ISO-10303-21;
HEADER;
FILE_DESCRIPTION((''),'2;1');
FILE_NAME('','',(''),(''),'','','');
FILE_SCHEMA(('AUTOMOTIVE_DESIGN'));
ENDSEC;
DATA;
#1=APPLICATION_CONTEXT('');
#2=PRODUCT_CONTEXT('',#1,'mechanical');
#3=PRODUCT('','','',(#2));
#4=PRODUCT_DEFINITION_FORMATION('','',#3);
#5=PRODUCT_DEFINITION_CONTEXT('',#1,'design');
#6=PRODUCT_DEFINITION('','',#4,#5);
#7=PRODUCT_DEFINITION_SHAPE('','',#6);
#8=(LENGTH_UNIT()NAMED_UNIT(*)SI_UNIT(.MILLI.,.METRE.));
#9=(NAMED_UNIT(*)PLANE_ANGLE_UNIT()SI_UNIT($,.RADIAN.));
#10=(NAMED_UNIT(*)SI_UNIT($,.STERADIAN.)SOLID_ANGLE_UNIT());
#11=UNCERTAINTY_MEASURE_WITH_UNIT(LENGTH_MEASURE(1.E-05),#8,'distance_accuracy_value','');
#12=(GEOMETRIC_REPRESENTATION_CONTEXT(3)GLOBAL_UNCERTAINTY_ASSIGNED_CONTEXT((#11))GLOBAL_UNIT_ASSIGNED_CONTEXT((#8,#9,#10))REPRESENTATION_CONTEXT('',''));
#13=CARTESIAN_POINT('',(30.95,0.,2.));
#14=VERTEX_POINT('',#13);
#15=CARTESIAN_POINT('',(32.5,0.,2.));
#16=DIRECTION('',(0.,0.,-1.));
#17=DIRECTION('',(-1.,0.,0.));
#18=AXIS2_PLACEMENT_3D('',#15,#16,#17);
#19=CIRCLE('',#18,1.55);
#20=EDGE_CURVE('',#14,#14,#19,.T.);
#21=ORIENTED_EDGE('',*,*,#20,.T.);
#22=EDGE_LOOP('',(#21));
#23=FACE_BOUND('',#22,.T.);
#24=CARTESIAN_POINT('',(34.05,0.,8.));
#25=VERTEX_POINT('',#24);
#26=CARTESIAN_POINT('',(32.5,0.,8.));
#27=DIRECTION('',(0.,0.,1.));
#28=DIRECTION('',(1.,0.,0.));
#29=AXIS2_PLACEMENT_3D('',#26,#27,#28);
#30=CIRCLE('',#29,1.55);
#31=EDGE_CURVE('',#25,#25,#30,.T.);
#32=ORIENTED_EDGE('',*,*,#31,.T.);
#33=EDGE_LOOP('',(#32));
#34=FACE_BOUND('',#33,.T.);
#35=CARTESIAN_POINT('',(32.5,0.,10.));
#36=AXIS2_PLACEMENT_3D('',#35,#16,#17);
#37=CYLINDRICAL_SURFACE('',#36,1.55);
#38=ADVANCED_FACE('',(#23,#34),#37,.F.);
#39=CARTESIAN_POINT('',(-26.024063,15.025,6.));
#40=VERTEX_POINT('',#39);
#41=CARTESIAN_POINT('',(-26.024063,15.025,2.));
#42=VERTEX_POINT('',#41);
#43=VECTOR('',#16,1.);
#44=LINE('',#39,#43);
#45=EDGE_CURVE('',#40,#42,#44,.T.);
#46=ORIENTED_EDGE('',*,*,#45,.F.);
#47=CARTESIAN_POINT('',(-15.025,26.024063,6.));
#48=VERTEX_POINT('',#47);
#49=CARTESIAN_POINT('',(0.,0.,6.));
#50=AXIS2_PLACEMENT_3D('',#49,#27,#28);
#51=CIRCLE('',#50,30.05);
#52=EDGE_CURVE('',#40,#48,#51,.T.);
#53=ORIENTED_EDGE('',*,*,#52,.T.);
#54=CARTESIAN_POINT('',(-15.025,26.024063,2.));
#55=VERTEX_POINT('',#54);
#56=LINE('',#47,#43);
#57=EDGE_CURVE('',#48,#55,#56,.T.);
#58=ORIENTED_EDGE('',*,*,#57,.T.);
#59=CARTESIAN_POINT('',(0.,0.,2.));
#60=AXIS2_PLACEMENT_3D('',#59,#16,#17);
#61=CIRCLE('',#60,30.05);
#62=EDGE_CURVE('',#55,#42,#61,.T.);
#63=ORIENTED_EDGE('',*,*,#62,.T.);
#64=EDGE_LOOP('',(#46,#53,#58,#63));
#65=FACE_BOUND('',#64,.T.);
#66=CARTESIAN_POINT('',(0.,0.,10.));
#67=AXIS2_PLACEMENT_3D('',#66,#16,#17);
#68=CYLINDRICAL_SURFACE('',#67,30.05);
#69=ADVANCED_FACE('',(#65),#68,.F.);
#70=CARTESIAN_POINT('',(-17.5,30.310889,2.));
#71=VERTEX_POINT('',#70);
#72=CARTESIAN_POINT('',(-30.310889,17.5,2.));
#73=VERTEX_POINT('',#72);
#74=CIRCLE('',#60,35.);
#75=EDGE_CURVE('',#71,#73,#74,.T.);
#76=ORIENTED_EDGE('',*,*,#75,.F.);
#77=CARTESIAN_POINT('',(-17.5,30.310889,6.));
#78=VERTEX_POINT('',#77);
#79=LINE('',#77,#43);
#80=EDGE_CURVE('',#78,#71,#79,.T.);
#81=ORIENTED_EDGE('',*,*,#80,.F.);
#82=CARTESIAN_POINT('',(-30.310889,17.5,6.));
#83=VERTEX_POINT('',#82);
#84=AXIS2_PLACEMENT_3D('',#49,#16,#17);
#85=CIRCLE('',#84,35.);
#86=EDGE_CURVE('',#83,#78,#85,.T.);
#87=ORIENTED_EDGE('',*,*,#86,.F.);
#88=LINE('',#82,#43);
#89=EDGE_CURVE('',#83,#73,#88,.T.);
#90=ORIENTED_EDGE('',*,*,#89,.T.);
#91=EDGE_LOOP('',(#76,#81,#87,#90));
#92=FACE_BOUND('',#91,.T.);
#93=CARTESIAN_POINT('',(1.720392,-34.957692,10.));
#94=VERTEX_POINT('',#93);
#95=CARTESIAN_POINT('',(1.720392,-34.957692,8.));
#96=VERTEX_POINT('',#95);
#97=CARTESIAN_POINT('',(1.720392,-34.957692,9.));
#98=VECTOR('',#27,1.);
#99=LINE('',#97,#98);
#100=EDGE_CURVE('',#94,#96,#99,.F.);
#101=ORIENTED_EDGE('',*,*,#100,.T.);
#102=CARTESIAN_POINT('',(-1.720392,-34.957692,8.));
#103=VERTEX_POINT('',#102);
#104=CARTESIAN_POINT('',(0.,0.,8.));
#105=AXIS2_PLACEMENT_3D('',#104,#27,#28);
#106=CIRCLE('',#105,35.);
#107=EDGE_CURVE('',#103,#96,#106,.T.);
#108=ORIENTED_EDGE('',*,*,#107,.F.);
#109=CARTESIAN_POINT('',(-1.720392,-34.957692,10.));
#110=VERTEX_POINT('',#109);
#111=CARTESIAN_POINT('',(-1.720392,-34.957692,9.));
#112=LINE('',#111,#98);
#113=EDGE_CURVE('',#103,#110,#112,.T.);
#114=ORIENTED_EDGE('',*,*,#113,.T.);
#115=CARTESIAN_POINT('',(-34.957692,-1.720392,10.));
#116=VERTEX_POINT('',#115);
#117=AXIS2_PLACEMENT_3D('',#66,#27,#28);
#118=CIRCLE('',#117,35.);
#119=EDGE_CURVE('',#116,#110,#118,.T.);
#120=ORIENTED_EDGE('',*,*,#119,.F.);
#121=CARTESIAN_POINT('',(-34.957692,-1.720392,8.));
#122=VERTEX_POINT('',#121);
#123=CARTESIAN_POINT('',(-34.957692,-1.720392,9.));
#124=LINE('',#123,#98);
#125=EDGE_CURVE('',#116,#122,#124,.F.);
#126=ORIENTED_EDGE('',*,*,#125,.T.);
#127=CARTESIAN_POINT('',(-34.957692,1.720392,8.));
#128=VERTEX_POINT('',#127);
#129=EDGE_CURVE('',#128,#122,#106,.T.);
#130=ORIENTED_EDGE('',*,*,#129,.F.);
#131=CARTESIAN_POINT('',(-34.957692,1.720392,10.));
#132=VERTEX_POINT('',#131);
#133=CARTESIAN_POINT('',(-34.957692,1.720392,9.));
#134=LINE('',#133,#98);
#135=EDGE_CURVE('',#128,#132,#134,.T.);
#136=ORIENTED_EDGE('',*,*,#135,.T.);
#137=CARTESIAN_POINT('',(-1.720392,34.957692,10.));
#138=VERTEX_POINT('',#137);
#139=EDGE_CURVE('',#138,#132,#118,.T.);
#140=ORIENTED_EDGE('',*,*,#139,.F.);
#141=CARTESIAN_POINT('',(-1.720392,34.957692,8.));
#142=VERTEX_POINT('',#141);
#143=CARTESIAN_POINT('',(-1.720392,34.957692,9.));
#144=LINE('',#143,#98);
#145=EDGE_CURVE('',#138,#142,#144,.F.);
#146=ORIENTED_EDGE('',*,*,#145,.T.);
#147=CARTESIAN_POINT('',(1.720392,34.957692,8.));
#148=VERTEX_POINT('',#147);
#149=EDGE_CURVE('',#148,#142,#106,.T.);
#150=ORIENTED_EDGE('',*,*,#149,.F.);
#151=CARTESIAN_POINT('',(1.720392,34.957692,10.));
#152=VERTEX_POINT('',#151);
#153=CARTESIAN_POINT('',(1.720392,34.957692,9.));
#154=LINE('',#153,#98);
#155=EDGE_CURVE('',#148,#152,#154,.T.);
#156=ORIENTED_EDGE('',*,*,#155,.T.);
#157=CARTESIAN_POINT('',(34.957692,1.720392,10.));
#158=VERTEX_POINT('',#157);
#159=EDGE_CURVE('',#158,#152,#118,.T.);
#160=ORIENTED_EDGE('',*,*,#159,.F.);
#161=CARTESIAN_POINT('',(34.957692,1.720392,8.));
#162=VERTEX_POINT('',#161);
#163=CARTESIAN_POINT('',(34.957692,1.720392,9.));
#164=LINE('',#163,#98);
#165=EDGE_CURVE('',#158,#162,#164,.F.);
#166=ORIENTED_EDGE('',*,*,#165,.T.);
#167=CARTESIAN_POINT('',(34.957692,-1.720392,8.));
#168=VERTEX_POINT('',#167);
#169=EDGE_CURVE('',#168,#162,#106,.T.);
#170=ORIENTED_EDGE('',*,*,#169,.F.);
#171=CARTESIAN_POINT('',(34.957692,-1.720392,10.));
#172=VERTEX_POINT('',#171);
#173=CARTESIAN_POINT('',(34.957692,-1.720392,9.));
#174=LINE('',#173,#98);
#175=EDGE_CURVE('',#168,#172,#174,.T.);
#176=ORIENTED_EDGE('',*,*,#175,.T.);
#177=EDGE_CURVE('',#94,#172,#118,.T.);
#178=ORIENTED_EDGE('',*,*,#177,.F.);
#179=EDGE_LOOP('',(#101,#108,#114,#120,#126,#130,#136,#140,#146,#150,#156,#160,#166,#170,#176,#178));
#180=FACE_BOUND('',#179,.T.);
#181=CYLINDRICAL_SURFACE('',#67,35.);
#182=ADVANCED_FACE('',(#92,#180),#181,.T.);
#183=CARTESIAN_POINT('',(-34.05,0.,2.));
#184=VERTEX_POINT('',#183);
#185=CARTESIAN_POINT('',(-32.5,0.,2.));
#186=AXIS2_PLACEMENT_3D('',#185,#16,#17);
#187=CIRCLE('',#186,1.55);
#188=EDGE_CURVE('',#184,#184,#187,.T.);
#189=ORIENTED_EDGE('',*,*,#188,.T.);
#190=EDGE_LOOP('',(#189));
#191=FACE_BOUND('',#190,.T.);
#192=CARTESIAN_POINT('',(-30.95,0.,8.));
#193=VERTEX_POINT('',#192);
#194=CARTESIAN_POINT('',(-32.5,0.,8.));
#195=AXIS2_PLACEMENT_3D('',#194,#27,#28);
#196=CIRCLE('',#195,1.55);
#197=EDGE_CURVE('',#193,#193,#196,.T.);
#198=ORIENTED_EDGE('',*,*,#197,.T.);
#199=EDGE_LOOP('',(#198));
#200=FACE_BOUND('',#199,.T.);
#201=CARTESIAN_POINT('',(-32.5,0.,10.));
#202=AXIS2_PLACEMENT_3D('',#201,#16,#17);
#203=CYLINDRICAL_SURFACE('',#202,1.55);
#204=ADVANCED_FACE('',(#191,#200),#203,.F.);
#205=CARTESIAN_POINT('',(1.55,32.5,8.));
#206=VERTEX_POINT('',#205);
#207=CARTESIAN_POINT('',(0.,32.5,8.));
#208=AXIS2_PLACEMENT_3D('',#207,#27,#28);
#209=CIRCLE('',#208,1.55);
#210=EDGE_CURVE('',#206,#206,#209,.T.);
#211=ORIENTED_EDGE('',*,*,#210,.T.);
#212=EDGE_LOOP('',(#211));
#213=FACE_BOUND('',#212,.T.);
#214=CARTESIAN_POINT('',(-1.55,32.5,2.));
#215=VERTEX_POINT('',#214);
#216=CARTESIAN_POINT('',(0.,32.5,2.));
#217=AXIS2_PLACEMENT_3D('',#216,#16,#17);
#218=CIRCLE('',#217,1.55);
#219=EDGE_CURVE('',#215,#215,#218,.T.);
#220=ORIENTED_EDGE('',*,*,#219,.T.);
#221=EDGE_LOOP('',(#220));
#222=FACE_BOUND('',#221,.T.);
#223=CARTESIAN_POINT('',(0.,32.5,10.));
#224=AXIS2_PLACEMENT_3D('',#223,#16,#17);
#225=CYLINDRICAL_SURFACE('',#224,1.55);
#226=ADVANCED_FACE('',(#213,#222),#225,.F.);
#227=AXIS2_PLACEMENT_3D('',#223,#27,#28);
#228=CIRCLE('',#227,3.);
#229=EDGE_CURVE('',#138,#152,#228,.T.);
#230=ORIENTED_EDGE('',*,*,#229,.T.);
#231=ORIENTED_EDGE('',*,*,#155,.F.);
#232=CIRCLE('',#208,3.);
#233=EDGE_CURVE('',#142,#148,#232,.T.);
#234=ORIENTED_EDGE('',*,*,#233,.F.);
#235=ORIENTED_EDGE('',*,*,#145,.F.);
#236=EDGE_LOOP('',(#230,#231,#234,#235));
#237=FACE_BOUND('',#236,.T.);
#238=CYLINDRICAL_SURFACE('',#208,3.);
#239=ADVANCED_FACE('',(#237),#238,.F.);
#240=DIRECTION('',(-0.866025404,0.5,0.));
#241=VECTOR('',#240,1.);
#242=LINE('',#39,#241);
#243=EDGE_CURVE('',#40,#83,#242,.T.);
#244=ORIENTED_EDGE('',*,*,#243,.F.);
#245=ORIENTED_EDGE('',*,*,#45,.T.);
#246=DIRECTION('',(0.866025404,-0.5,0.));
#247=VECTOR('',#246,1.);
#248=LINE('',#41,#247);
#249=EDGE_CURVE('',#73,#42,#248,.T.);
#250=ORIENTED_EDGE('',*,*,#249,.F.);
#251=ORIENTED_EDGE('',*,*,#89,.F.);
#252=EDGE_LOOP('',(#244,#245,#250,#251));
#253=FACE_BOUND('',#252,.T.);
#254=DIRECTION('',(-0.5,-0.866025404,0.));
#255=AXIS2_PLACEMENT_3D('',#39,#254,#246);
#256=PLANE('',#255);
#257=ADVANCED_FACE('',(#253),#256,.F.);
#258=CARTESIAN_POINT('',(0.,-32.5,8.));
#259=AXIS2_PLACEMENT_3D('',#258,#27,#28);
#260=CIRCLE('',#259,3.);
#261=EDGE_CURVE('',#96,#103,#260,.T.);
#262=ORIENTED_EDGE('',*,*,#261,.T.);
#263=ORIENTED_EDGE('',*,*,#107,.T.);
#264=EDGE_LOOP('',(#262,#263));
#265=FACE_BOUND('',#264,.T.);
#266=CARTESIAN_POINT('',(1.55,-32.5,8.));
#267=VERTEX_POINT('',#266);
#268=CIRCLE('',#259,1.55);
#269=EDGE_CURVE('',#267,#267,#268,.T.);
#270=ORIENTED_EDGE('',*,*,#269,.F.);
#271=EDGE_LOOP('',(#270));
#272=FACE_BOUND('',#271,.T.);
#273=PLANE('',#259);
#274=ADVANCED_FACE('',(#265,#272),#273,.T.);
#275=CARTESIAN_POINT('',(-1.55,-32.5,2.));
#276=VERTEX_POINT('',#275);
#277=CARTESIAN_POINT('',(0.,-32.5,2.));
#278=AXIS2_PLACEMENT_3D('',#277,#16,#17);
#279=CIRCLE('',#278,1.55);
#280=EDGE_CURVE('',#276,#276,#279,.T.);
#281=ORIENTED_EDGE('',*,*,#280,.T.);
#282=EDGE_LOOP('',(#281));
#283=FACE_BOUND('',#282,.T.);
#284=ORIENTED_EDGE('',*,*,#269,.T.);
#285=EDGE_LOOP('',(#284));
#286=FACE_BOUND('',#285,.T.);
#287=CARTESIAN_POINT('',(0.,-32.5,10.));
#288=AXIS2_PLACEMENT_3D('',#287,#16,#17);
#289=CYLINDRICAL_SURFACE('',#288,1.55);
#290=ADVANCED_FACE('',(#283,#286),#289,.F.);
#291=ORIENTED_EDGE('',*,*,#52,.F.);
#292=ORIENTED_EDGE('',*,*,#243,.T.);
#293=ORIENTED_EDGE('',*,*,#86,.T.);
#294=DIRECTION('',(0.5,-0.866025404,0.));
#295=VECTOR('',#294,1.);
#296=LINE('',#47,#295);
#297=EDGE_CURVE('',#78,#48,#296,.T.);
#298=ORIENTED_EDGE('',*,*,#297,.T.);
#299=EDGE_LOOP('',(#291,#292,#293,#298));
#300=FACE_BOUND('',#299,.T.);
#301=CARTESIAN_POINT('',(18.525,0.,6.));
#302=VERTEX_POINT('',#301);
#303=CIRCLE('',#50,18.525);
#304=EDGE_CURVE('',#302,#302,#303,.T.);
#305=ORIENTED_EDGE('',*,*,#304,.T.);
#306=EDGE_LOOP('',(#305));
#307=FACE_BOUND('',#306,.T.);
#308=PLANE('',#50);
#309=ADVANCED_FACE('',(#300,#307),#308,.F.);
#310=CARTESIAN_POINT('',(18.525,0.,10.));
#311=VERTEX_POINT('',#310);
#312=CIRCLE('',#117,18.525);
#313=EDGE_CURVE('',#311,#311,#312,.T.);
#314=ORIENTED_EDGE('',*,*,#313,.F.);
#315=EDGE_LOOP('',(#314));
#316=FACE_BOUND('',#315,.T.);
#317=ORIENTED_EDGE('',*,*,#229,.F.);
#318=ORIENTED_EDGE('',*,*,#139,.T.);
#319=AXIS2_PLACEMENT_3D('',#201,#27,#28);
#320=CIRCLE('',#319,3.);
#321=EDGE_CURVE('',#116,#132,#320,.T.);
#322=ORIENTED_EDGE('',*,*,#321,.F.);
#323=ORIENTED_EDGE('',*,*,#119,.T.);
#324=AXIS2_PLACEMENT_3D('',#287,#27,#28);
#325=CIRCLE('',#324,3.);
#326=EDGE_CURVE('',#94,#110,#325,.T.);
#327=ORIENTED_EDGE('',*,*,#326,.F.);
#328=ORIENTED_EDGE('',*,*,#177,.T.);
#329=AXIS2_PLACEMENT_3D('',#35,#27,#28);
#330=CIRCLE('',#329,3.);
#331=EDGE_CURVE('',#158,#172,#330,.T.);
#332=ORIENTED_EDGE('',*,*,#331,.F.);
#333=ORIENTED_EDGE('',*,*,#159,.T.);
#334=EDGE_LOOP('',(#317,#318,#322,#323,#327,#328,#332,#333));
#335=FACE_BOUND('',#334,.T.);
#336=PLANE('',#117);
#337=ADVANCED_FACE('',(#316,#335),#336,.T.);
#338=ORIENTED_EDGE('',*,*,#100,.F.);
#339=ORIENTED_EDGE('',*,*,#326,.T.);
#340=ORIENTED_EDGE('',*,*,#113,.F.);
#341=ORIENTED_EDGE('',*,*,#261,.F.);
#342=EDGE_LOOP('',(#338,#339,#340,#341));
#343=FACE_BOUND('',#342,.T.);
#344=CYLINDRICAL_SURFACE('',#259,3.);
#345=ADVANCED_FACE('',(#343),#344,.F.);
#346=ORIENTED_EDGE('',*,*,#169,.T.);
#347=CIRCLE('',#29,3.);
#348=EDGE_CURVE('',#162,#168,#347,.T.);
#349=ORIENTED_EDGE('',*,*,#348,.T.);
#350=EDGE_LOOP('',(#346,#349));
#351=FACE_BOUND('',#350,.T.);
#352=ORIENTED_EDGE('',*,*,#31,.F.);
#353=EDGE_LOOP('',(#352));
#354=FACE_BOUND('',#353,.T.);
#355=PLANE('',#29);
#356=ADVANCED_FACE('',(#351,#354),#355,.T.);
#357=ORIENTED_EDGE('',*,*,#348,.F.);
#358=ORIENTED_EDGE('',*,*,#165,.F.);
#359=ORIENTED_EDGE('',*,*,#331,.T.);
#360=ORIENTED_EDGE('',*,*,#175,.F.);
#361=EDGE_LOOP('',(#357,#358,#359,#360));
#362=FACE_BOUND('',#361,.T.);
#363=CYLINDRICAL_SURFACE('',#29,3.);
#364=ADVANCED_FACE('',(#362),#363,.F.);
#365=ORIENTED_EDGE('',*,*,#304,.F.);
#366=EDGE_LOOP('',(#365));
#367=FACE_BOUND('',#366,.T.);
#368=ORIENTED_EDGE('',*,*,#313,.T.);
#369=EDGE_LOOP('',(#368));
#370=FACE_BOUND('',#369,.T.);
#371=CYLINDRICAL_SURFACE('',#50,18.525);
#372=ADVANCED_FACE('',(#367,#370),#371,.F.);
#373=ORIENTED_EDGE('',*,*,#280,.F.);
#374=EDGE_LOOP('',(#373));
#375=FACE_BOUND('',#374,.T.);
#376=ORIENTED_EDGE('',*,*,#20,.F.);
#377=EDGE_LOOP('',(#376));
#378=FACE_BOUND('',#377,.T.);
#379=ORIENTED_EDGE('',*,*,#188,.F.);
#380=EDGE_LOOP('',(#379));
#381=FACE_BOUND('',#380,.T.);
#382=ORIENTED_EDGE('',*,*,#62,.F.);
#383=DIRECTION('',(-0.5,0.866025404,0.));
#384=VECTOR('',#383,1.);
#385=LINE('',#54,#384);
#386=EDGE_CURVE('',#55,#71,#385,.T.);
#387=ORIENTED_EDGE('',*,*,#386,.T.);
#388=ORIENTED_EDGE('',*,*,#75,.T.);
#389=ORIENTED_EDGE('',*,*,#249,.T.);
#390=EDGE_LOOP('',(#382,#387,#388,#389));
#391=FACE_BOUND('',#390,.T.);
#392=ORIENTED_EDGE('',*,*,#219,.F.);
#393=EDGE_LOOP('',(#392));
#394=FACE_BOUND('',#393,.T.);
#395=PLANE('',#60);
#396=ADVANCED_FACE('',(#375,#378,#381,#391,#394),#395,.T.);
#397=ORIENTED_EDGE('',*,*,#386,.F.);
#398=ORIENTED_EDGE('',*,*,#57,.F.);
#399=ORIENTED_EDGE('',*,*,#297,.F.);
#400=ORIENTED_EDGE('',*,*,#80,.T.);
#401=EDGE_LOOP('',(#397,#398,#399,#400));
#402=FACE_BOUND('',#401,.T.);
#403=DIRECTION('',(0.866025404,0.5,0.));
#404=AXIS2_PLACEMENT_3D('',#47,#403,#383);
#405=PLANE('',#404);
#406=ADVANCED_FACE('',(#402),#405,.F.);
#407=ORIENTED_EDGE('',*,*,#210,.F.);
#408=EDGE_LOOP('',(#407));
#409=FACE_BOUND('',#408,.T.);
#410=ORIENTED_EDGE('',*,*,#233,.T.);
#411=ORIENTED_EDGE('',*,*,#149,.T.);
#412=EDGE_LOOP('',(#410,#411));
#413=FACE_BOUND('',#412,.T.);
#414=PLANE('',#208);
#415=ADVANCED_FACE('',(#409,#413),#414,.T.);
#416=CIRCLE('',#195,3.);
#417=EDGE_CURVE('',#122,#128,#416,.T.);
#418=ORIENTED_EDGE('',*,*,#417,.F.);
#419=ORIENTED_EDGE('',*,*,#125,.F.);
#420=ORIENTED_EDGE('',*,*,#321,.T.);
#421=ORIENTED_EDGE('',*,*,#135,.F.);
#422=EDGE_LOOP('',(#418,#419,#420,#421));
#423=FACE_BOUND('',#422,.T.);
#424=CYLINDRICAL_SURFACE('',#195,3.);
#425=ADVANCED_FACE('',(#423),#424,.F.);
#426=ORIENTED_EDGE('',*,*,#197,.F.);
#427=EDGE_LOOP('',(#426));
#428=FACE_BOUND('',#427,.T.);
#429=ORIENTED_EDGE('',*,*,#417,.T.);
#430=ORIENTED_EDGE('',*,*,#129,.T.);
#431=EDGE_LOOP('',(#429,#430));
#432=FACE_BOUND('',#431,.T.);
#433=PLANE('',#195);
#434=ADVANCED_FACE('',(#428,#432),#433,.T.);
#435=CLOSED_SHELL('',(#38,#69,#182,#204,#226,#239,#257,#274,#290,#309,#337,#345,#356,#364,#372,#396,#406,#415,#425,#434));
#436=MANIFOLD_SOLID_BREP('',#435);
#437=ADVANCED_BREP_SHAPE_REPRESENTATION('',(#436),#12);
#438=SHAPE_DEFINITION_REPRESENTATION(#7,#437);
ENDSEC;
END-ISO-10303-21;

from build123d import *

# Parameters (mm, degrees)
EXTRUDE_1_OUTLINE_R   = 35
EXTRUDE_1_OUTLINE_R_2 = 1.55
EXTRUDE_1_OUTLINE_R_3 = 30.05
EXTRUDE_1_DEPTH       = 10
SKETCH_2_R            = 33.525
SKETCH_2_R_2          = 18.525
EXTRUDE_1_2_DEPTH     = 4
SKETCH_3_R            = 1.55
CUT_EXTRUDE_1_DEPTH   = 51.497524692
CUT_EXTRUDE_2_DEPTH   = 6
SKETCH_8_R            = 35
SKETCH_8_R_2          = 30.05
CUT_EXTRUDE_3_DEPTH   = 2
SKETCH_9_R            = 3
CUT_EXTRUDE_4_DEPTH   = 2


# Read off the part's stored shape, not the designer's step: 凸台-拉伸1
with BuildPart() as part:
    # Extrude 1 outline → Extrude 1 (new body)
    with BuildSketch(Plane.XY):
        Circle(EXTRUDE_1_OUTLINE_R)
        with Locations((0, -32.5)):
            Circle(EXTRUDE_1_OUTLINE_R_2, mode=Mode.SUBTRACT)
        with Locations((-32.5, 0)):
            Circle(EXTRUDE_1_OUTLINE_R_2, mode=Mode.SUBTRACT)
        Circle(EXTRUDE_1_OUTLINE_R_3, mode=Mode.SUBTRACT)
        with Locations((32.5, 0)):
            Circle(EXTRUDE_1_OUTLINE_R_2, mode=Mode.SUBTRACT)
        with Locations((0, 32.5)):
            Circle(EXTRUDE_1_OUTLINE_R_2, mode=Mode.SUBTRACT)
    extrude(amount=EXTRUDE_1_DEPTH)

    # 草图2 → Extrude 1 2 (add)
    with BuildSketch(Plane.XY.offset(10)):
        Circle(SKETCH_2_R)
        Circle(SKETCH_2_R_2, mode=Mode.SUBTRACT)
    extrude(amount=-EXTRUDE_1_2_DEPTH)

    # 草图3 → 切除-拉伸1 (cut, through all)
    with BuildSketch(Plane(origin=(0, 0, 0), x_dir=(-1, 0, 0), z_dir=(0, 0, -1))):
        with Locations(Location((32.5, 0, 0), (0, 0, 180))):
            Circle(SKETCH_3_R)
        with Locations(Location((0, -32.5, 0), (0, 0, 180))):
            Circle(SKETCH_3_R)
        with Locations(Location((-32.5, 0, 0), (0, 0, 180))):
            Circle(SKETCH_3_R)
        with Locations(Location((0, 32.5, 0), (0, 0, 180))):
            Circle(SKETCH_3_R)
    extrude(amount=-CUT_EXTRUDE_1_DEPTH, mode=Mode.SUBTRACT)

    # 草图7 → 切除-拉伸2 (cut)
    with BuildSketch(Plane(origin=(0, 0, 0), x_dir=(-1, 0, 0), z_dir=(0, 0, -1))):
        with BuildLine():
            Line((15.025, 26.024063384), (17.5, 30.310889132))
            ThreePointArc((17.5, 30.310889132), (24.748737342, 24.748737342), (30.310889132, 17.5))
            Line((30.310889132, 17.5), (26.024063384, 15.025))
            ThreePointArc((26.024063384, 15.025), (21.248558775, 21.248558775), (15.025, 26.024063384))
        make_face()
    extrude(amount=-CUT_EXTRUDE_2_DEPTH, mode=Mode.SUBTRACT)

    # 草图8 → 切除-拉伸3 (cut)
    with BuildSketch(Plane(origin=(0, 0, 0), x_dir=(-1, 0, 0), z_dir=(0, 0, -1))):
        with Locations(Location((0, 0, 0), (0, 0, 30))):
            Circle(SKETCH_8_R)
        Circle(SKETCH_8_R_2, mode=Mode.SUBTRACT)
    extrude(amount=-CUT_EXTRUDE_3_DEPTH, mode=Mode.SUBTRACT)

    # 草图9 → 切除-拉伸4 (cut)
    with BuildSketch(Plane.XY.offset(10)):
        with Locations((0, 32.5)):
            Circle(SKETCH_9_R)
        with Locations((32.5, 0)):
            Circle(SKETCH_9_R)
        with Locations((0, -32.5)):
            Circle(SKETCH_9_R)
        with Locations((-32.5, 0)):
            Circle(SKETCH_9_R)
    extrude(amount=-CUT_EXTRUDE_4_DEPTH, mode=Mode.SUBTRACT)


solid = part.part
